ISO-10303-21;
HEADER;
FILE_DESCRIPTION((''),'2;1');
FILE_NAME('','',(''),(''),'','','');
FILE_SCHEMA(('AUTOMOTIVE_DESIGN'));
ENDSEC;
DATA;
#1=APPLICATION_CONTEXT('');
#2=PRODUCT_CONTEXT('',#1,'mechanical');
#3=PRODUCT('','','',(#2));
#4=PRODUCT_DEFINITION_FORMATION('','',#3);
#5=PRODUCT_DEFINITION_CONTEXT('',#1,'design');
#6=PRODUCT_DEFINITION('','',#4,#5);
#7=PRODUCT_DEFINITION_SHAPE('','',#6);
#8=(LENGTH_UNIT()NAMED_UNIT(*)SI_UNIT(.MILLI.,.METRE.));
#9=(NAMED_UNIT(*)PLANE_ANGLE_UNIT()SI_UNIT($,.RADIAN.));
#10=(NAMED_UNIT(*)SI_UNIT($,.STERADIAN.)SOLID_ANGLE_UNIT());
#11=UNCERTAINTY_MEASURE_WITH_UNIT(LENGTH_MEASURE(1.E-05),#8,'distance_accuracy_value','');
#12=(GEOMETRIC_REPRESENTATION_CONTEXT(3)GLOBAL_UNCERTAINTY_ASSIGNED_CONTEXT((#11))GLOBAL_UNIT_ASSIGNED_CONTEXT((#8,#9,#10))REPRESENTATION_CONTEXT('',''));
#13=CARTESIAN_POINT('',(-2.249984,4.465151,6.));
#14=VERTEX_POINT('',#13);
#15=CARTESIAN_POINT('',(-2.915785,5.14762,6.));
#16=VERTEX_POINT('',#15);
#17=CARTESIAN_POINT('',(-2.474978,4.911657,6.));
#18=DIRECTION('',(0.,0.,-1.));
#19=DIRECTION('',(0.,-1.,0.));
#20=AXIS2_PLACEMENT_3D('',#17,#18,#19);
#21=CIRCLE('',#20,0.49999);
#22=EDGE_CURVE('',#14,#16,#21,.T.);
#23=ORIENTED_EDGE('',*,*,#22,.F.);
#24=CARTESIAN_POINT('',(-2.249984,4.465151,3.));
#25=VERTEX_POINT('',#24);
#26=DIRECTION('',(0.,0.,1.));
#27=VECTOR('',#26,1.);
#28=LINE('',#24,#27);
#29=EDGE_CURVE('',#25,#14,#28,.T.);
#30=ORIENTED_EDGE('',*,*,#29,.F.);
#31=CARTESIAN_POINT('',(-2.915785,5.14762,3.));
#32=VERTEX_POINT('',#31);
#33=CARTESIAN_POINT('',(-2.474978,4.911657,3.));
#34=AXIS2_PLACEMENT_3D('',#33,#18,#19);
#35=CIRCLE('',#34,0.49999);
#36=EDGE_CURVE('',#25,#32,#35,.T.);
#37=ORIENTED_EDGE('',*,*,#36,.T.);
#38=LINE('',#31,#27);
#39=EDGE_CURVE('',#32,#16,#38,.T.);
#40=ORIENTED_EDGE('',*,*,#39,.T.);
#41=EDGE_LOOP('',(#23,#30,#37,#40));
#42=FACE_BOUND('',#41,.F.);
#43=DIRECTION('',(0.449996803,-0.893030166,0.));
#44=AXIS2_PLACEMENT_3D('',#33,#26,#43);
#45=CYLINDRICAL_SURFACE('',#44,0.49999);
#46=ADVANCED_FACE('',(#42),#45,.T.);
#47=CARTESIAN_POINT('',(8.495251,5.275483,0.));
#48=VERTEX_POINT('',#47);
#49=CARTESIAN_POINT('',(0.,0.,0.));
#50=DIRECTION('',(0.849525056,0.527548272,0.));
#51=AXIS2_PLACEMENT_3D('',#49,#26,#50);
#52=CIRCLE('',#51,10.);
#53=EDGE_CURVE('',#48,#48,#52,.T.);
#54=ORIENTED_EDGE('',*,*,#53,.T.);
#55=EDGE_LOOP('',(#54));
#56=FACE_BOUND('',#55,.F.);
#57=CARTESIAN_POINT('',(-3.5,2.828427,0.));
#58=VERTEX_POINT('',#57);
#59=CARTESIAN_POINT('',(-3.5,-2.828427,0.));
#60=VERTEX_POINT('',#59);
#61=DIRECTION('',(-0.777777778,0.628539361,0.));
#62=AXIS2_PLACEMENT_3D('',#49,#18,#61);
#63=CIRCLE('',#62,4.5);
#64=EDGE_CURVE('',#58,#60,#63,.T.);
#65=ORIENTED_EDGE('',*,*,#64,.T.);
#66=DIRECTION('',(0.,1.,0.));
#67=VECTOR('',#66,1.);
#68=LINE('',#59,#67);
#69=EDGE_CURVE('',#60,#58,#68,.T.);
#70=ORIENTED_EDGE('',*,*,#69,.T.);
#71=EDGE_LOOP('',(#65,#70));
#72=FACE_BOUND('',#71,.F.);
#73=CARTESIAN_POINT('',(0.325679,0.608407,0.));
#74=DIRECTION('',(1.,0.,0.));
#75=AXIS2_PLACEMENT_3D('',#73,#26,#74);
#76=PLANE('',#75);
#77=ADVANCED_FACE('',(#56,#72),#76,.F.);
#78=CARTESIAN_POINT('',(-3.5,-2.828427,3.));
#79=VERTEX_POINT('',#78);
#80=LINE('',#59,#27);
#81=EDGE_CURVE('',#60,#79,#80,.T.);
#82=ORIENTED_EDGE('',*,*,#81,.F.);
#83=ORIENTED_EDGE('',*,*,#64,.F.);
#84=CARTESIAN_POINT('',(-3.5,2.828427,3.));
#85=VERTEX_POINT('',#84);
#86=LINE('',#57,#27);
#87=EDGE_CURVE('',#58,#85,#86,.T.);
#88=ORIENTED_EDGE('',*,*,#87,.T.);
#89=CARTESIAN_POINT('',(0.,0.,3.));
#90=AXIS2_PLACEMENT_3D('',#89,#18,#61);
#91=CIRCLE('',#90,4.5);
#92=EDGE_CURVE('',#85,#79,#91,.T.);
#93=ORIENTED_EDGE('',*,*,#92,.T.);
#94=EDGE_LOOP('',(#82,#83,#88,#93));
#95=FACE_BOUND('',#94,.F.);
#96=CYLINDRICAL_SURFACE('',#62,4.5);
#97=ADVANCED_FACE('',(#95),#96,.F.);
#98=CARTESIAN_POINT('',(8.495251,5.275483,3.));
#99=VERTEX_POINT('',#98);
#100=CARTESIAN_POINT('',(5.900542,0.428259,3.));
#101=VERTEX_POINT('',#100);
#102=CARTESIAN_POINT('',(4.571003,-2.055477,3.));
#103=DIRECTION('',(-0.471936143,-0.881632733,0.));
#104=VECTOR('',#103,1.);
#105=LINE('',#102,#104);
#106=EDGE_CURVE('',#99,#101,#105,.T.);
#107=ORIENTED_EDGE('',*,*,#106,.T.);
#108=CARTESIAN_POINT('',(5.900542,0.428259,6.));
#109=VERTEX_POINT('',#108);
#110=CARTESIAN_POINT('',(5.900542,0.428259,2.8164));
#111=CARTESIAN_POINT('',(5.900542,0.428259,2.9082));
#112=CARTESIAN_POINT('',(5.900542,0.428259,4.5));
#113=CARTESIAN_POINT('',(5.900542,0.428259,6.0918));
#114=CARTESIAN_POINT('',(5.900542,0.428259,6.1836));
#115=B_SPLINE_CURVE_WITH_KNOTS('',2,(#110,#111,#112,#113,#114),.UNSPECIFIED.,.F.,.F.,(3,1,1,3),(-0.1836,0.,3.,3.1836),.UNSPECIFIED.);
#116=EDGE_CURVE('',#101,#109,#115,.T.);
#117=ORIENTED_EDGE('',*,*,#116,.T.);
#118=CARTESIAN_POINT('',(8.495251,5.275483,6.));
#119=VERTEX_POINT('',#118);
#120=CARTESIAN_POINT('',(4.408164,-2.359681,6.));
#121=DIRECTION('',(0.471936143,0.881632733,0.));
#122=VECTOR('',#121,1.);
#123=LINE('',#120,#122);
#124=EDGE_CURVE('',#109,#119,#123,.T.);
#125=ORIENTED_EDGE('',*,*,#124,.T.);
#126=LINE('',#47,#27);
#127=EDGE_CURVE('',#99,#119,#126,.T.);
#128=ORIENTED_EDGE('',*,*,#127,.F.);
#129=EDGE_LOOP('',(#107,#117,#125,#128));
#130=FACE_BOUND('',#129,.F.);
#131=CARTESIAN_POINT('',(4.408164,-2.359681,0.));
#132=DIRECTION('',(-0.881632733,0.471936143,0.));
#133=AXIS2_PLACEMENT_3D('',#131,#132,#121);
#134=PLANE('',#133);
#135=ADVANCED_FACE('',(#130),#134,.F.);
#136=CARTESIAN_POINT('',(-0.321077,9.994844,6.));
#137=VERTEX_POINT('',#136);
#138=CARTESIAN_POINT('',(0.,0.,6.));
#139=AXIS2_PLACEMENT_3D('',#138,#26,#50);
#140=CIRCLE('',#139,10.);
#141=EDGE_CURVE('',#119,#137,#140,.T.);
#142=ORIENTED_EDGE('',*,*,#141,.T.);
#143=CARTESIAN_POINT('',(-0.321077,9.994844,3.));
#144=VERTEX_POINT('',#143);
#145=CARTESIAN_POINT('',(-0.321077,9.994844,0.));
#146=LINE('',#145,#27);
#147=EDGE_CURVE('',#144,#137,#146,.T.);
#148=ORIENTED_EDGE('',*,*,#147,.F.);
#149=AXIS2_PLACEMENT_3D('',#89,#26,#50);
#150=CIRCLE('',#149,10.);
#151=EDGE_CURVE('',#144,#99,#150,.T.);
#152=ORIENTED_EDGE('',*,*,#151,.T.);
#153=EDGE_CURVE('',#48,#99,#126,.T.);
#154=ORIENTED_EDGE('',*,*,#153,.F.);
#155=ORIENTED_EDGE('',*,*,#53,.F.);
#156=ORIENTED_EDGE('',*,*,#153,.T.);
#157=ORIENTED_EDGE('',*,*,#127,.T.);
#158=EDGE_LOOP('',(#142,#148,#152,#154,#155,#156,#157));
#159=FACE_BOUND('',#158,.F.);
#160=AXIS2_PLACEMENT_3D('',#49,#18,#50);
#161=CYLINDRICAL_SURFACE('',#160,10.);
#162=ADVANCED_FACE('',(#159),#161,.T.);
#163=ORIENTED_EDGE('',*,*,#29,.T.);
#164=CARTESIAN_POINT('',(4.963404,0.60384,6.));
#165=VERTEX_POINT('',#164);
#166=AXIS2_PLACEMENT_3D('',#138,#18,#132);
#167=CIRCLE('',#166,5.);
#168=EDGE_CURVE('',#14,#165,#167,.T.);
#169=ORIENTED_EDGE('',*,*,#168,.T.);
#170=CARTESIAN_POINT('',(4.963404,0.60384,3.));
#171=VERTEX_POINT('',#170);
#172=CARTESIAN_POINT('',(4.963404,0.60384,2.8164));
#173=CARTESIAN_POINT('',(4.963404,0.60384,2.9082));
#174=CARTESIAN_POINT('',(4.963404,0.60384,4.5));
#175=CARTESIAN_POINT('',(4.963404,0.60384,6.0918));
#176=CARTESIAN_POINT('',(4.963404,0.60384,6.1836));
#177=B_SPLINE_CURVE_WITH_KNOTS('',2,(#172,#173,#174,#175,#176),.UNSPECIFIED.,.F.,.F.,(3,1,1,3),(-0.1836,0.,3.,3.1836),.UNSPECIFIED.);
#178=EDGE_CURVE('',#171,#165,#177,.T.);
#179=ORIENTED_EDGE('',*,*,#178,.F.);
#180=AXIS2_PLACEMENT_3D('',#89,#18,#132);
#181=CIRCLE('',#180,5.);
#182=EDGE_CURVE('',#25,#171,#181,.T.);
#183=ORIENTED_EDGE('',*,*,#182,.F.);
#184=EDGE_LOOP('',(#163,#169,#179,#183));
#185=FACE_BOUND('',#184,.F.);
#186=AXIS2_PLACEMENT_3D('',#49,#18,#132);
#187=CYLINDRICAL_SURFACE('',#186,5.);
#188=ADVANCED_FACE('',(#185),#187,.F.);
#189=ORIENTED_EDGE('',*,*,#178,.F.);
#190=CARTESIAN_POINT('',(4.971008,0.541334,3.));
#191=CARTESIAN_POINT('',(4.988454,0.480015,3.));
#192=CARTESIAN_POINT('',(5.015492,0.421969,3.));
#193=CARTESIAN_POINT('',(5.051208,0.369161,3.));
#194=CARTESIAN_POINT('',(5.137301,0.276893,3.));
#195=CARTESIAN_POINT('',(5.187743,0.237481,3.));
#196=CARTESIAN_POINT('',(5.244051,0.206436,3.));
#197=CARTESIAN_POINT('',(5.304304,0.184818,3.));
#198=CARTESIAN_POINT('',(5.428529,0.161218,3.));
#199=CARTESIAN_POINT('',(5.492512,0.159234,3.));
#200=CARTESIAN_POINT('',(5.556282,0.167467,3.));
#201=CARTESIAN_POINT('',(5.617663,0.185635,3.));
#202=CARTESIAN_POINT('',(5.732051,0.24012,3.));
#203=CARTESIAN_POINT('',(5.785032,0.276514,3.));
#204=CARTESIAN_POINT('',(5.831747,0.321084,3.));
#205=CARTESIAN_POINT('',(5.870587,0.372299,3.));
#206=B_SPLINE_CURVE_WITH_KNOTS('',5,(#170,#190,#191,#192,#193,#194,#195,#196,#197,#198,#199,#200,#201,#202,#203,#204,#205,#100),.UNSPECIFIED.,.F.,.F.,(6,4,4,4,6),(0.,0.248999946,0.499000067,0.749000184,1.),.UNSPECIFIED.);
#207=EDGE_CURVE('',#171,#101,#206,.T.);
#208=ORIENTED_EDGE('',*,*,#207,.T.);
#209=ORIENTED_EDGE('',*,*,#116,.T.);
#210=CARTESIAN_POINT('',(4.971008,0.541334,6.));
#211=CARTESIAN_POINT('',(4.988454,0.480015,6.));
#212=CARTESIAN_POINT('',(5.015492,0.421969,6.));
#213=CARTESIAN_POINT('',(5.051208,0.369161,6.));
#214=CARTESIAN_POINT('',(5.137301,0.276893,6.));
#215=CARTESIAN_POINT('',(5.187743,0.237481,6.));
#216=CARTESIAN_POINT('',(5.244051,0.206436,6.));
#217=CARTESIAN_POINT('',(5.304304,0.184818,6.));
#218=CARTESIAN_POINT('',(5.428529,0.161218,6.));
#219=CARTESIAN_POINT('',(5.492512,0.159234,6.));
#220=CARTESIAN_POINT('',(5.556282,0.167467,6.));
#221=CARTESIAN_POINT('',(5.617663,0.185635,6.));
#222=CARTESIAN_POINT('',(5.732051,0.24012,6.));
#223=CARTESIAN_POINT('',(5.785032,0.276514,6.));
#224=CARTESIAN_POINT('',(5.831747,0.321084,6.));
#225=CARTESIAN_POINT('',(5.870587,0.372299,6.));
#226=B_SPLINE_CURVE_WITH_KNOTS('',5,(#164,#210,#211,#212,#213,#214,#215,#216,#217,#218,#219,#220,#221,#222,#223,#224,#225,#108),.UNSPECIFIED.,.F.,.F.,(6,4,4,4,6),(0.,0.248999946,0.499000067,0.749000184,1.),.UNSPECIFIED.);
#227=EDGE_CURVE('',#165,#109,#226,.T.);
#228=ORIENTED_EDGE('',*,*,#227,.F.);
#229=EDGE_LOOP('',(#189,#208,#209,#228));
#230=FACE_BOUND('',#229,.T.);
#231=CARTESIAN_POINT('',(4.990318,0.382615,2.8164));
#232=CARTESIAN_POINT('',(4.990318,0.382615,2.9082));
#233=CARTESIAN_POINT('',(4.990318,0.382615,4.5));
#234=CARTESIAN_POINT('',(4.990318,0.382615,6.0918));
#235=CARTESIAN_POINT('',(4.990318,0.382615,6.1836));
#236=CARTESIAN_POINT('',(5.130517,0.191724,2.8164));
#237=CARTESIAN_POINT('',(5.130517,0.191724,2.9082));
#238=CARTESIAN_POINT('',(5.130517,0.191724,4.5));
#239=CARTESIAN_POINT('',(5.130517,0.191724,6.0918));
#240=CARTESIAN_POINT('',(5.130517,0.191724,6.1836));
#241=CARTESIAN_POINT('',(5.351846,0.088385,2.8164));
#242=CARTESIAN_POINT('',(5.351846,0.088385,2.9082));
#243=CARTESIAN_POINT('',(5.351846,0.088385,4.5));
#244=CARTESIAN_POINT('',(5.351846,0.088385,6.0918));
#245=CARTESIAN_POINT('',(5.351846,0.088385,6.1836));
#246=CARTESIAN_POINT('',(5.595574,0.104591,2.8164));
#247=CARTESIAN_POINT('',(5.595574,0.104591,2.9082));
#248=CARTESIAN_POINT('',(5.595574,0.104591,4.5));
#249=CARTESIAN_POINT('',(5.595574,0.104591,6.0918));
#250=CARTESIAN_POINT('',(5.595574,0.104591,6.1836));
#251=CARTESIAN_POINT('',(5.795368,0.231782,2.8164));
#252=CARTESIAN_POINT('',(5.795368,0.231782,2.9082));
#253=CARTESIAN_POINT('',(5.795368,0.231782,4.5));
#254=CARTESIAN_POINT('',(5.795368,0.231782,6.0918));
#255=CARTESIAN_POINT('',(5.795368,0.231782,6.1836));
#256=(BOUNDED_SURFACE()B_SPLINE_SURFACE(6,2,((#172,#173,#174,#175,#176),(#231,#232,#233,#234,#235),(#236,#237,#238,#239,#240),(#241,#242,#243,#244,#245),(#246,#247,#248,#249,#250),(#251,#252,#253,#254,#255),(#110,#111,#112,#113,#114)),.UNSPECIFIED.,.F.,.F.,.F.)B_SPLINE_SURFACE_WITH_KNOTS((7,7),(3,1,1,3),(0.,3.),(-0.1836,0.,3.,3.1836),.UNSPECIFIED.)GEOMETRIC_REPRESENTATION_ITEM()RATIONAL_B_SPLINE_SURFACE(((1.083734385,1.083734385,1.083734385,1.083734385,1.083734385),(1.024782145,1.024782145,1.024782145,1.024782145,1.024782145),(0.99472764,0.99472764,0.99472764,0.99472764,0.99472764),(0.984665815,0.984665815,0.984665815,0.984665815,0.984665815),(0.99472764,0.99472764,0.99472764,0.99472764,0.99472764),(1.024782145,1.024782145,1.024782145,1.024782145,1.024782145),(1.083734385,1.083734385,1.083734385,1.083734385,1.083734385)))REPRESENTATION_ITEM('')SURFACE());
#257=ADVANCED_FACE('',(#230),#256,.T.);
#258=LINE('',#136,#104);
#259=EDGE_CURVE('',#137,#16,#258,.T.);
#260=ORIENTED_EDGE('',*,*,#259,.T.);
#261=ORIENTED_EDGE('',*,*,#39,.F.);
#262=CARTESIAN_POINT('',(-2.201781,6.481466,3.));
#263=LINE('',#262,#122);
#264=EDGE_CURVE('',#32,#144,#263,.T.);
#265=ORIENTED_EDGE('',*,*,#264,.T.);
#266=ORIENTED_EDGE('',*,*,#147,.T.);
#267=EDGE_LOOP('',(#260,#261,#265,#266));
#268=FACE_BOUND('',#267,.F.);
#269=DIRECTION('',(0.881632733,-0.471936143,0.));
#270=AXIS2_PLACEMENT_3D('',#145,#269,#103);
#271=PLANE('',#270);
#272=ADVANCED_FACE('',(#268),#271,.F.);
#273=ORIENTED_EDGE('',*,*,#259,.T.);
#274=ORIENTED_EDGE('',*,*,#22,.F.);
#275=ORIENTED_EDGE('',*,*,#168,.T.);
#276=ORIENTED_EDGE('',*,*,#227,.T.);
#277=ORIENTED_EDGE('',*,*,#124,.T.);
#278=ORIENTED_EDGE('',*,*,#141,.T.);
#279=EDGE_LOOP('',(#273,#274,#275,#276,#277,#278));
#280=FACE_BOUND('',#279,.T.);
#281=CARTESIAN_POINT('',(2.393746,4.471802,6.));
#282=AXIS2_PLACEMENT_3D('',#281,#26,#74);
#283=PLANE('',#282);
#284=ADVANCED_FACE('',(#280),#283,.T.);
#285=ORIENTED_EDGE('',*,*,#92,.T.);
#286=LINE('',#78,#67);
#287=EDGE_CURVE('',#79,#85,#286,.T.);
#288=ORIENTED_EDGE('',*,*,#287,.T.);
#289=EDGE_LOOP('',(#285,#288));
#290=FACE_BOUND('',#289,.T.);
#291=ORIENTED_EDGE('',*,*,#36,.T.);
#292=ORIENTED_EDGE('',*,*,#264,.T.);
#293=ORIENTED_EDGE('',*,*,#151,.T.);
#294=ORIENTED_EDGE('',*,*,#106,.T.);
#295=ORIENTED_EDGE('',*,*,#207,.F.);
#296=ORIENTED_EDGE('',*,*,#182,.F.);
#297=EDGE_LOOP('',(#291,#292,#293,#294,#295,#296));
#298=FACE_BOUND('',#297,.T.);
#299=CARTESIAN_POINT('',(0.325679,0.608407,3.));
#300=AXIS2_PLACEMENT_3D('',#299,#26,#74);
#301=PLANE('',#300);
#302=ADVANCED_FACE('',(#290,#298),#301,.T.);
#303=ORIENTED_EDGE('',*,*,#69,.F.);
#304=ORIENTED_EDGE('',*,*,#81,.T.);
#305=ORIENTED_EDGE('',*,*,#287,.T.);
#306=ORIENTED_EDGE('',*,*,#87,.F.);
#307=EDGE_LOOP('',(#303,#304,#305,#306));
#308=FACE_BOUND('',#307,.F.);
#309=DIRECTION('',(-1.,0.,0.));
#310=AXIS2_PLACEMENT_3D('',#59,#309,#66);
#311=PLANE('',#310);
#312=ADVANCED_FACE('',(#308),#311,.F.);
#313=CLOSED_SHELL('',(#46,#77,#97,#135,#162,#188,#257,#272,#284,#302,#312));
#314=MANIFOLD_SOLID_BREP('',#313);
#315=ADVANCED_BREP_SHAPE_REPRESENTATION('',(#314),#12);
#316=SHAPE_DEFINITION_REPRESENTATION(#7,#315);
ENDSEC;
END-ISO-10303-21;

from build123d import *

# Parameters (mm, degrees)
F1_DEPTH = 3
F2_DEPTH = 6
F3_R     = 0.49999


# Not quite as in the source:
# - a fillet or chamfer is up to 0.001 mm smaller than in the source, because OpenCascade refuses the exact size


with BuildPart() as f1:
    # F0 (on Top) → F1 (new body)
    with BuildSketch(Plane.XY):
        with BuildLine():
            ThreePointArc((-0.3210767755, 9.9948441561), (-6.9566239026, -7.1836887375), (10, 0))
            ThreePointArc((10, 0), (9.616457393, 2.7429449883), (8.4952505583, 5.2754827222))
            Line((8.4952505583, 5.2754827222), (4.4081636669, -2.359680717))
            ThreePointArc((4.4081636669, -2.359680717), (2.359680717, 4.4081636669), (-4.4081636669, 2.359680717))
            Line((-4.4081636669, 2.359680717), (-0.3210767755, 9.9948441561))
        make_face()
        with BuildLine():
            ThreePointArc((-3.5, 2.8284271247), (4.5, 0), (-3.5, -2.8284271247))
            Line((-3.5, -2.8284271247), (-3.5, 2.8284271247))
        make_face(mode=Mode.SUBTRACT)
        with BuildLine():
            Line((4.4081636669, -2.359680717), (8.4952505583, 5.2754827222))
            ThreePointArc((8.4952505583, 5.2754827222), (4.7193614339, 8.8163273338), (-0.3210767755, 9.9948441561))
            Line((-0.3210767755, 9.9948441561), (-4.4081636669, 2.359680717))
            ThreePointArc((-4.4081636669, 2.359680717), (2.359680717, 4.4081636669), (4.4081636669, -2.359680717))
        make_face()
    extrude(amount=F1_DEPTH)

    # F0 (on Top) → F2 (join)
    with BuildSketch(Plane.XY):
        with BuildLine():
            Line((4.4081636669, -2.359680717), (8.4952505583, 5.2754827222))
            ThreePointArc((8.4952505583, 5.2754827222), (4.7193614339, 8.8163273338), (-0.3210767755, 9.9948441561))
            Line((-0.3210767755, 9.9948441561), (-4.4081636669, 2.359680717))
            ThreePointArc((-4.4081636669, 2.359680717), (2.359680717, 4.4081636669), (4.4081636669, -2.359680717))
        make_face()
    extrude(amount=F2_DEPTH)

    # F3 (radius 0.5 in the source; OpenCascade refuses exactly that, so slightly less here)
    f3_edges = [f1.edges().sort_by_distance(p)[0] for p in [
        (-4.408164, 2.359681, 4.5),
        (4.408164, -2.359681, 4.5),
    ]]
    fillet(f3_edges, radius=F3_R)


solid = f1.part
